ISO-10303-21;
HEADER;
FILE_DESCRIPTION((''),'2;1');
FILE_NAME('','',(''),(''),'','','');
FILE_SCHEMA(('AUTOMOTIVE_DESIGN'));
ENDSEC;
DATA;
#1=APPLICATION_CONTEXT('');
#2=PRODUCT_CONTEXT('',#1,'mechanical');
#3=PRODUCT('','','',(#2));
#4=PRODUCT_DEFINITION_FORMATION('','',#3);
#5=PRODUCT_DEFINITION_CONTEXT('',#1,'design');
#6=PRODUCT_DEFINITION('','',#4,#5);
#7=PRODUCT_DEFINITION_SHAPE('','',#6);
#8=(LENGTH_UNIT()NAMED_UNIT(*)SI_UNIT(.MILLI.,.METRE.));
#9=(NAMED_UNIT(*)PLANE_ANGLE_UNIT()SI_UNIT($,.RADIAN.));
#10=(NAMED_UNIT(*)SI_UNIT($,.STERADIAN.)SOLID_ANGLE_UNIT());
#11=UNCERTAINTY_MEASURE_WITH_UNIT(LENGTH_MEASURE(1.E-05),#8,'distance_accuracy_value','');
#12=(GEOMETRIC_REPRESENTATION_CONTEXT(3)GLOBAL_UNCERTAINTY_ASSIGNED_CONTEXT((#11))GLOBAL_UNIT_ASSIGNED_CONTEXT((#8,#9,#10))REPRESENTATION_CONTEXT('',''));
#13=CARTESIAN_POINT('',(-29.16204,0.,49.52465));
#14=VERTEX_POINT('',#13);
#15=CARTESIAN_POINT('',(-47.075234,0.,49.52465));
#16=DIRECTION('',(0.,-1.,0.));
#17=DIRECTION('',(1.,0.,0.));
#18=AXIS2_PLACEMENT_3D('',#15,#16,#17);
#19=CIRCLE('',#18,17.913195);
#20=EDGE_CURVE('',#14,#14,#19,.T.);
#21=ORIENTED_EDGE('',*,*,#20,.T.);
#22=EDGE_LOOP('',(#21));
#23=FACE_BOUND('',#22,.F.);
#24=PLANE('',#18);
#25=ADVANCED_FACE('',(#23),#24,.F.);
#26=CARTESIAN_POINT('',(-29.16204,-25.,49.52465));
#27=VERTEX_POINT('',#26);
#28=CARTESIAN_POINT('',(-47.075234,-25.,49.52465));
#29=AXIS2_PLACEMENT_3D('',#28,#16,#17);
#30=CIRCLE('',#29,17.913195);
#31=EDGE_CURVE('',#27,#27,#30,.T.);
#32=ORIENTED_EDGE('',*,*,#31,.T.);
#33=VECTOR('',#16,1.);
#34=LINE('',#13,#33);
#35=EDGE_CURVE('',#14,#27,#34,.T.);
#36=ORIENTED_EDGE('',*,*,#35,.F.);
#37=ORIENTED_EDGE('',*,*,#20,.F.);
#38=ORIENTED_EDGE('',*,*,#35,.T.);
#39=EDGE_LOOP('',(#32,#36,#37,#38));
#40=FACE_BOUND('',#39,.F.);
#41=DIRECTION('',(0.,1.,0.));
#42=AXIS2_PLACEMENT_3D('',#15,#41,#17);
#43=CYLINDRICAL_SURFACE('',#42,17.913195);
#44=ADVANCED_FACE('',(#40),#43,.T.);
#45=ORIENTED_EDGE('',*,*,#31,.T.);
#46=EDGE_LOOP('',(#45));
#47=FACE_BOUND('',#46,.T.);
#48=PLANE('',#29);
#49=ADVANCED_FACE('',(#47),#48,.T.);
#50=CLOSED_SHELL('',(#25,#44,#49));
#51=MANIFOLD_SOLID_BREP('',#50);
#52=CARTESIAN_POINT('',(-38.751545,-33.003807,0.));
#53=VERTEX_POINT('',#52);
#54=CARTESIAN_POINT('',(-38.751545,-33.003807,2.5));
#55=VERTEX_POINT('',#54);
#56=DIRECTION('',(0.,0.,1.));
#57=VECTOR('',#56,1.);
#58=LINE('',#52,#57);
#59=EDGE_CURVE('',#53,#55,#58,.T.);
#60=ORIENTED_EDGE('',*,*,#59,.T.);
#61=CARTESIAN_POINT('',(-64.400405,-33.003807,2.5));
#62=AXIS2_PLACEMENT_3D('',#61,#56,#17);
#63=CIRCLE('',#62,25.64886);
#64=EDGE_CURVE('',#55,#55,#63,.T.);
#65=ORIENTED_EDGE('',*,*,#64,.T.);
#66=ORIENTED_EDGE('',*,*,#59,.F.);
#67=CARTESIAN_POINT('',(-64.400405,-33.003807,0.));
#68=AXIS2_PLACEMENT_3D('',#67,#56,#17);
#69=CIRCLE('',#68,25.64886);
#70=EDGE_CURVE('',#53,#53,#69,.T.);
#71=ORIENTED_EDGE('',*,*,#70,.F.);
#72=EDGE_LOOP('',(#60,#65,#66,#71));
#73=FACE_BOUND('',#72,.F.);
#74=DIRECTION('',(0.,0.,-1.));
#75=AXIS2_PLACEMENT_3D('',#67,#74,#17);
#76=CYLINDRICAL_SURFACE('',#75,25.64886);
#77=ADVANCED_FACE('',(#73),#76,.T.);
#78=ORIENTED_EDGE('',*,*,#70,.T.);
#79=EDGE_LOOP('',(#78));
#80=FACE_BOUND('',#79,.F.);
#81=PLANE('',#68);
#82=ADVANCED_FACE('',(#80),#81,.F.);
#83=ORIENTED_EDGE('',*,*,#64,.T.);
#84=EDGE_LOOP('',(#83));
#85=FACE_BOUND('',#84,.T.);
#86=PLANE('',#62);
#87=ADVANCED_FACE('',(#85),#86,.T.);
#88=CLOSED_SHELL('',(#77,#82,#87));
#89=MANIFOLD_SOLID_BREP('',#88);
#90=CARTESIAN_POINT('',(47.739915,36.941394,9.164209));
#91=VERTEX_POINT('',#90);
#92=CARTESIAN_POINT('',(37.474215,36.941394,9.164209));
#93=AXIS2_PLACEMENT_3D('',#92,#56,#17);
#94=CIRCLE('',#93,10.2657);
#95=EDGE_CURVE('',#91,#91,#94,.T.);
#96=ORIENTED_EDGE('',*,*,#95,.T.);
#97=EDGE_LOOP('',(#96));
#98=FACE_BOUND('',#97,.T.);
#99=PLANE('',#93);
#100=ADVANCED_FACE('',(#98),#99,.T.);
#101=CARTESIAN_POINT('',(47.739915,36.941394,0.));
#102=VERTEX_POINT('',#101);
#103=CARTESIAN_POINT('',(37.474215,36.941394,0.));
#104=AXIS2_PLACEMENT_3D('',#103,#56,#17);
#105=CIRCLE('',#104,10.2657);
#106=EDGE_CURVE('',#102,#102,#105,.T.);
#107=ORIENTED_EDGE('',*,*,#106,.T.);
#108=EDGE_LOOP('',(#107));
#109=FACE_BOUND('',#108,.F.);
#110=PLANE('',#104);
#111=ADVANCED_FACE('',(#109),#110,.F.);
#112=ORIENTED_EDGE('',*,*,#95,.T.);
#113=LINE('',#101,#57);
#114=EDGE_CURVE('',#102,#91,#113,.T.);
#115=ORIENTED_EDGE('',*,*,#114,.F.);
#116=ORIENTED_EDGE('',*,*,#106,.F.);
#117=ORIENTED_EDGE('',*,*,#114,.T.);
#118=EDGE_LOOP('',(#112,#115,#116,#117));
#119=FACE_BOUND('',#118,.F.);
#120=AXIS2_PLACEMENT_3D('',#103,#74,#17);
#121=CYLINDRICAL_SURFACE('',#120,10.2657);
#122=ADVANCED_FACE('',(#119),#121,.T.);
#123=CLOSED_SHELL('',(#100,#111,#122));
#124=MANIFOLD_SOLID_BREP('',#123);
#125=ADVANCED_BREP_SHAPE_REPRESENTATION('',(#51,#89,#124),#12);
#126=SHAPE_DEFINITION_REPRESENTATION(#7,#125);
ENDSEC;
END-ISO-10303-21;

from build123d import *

# Parameters (mm, degrees)
F0_R     = 10.2656995883
F1_DEPTH = 9.1642085463
F2_R     = 25.6488599295
F3_DEPTH = 2.5
F4_R     = 17.9131946883
F5_DEPTH = 25


# Not quite as in the source:
# - the program builds the solid bodies; features that only make, move or delete a surface that nothing else refers to are left out


with BuildPart() as f1:
    # F0 (on Top) → F1 (new body)
    with BuildSketch(Plane.XY):
        with Locations((37.4742150307, 36.9413942099)):
            Circle(F0_R)
    extrude(amount=F1_DEPTH)


with BuildPart() as f3:
    # F2 (on Top) → F3 (new body)
    with BuildSketch(Plane.XY):
        with Locations((-64.4004046917, -33.0038070679)):
            Circle(F2_R)
    extrude(amount=F3_DEPTH)


with BuildPart() as f5:
    # F4 (on Front) → F5 (new body)
    with BuildSketch(Plane.XZ):
        with Locations((-47.0752343535, 49.5246499777)):
            Circle(F4_R)
    extrude(amount=F5_DEPTH)


solid = Compound([f1.part, f3.part, f5.part])
